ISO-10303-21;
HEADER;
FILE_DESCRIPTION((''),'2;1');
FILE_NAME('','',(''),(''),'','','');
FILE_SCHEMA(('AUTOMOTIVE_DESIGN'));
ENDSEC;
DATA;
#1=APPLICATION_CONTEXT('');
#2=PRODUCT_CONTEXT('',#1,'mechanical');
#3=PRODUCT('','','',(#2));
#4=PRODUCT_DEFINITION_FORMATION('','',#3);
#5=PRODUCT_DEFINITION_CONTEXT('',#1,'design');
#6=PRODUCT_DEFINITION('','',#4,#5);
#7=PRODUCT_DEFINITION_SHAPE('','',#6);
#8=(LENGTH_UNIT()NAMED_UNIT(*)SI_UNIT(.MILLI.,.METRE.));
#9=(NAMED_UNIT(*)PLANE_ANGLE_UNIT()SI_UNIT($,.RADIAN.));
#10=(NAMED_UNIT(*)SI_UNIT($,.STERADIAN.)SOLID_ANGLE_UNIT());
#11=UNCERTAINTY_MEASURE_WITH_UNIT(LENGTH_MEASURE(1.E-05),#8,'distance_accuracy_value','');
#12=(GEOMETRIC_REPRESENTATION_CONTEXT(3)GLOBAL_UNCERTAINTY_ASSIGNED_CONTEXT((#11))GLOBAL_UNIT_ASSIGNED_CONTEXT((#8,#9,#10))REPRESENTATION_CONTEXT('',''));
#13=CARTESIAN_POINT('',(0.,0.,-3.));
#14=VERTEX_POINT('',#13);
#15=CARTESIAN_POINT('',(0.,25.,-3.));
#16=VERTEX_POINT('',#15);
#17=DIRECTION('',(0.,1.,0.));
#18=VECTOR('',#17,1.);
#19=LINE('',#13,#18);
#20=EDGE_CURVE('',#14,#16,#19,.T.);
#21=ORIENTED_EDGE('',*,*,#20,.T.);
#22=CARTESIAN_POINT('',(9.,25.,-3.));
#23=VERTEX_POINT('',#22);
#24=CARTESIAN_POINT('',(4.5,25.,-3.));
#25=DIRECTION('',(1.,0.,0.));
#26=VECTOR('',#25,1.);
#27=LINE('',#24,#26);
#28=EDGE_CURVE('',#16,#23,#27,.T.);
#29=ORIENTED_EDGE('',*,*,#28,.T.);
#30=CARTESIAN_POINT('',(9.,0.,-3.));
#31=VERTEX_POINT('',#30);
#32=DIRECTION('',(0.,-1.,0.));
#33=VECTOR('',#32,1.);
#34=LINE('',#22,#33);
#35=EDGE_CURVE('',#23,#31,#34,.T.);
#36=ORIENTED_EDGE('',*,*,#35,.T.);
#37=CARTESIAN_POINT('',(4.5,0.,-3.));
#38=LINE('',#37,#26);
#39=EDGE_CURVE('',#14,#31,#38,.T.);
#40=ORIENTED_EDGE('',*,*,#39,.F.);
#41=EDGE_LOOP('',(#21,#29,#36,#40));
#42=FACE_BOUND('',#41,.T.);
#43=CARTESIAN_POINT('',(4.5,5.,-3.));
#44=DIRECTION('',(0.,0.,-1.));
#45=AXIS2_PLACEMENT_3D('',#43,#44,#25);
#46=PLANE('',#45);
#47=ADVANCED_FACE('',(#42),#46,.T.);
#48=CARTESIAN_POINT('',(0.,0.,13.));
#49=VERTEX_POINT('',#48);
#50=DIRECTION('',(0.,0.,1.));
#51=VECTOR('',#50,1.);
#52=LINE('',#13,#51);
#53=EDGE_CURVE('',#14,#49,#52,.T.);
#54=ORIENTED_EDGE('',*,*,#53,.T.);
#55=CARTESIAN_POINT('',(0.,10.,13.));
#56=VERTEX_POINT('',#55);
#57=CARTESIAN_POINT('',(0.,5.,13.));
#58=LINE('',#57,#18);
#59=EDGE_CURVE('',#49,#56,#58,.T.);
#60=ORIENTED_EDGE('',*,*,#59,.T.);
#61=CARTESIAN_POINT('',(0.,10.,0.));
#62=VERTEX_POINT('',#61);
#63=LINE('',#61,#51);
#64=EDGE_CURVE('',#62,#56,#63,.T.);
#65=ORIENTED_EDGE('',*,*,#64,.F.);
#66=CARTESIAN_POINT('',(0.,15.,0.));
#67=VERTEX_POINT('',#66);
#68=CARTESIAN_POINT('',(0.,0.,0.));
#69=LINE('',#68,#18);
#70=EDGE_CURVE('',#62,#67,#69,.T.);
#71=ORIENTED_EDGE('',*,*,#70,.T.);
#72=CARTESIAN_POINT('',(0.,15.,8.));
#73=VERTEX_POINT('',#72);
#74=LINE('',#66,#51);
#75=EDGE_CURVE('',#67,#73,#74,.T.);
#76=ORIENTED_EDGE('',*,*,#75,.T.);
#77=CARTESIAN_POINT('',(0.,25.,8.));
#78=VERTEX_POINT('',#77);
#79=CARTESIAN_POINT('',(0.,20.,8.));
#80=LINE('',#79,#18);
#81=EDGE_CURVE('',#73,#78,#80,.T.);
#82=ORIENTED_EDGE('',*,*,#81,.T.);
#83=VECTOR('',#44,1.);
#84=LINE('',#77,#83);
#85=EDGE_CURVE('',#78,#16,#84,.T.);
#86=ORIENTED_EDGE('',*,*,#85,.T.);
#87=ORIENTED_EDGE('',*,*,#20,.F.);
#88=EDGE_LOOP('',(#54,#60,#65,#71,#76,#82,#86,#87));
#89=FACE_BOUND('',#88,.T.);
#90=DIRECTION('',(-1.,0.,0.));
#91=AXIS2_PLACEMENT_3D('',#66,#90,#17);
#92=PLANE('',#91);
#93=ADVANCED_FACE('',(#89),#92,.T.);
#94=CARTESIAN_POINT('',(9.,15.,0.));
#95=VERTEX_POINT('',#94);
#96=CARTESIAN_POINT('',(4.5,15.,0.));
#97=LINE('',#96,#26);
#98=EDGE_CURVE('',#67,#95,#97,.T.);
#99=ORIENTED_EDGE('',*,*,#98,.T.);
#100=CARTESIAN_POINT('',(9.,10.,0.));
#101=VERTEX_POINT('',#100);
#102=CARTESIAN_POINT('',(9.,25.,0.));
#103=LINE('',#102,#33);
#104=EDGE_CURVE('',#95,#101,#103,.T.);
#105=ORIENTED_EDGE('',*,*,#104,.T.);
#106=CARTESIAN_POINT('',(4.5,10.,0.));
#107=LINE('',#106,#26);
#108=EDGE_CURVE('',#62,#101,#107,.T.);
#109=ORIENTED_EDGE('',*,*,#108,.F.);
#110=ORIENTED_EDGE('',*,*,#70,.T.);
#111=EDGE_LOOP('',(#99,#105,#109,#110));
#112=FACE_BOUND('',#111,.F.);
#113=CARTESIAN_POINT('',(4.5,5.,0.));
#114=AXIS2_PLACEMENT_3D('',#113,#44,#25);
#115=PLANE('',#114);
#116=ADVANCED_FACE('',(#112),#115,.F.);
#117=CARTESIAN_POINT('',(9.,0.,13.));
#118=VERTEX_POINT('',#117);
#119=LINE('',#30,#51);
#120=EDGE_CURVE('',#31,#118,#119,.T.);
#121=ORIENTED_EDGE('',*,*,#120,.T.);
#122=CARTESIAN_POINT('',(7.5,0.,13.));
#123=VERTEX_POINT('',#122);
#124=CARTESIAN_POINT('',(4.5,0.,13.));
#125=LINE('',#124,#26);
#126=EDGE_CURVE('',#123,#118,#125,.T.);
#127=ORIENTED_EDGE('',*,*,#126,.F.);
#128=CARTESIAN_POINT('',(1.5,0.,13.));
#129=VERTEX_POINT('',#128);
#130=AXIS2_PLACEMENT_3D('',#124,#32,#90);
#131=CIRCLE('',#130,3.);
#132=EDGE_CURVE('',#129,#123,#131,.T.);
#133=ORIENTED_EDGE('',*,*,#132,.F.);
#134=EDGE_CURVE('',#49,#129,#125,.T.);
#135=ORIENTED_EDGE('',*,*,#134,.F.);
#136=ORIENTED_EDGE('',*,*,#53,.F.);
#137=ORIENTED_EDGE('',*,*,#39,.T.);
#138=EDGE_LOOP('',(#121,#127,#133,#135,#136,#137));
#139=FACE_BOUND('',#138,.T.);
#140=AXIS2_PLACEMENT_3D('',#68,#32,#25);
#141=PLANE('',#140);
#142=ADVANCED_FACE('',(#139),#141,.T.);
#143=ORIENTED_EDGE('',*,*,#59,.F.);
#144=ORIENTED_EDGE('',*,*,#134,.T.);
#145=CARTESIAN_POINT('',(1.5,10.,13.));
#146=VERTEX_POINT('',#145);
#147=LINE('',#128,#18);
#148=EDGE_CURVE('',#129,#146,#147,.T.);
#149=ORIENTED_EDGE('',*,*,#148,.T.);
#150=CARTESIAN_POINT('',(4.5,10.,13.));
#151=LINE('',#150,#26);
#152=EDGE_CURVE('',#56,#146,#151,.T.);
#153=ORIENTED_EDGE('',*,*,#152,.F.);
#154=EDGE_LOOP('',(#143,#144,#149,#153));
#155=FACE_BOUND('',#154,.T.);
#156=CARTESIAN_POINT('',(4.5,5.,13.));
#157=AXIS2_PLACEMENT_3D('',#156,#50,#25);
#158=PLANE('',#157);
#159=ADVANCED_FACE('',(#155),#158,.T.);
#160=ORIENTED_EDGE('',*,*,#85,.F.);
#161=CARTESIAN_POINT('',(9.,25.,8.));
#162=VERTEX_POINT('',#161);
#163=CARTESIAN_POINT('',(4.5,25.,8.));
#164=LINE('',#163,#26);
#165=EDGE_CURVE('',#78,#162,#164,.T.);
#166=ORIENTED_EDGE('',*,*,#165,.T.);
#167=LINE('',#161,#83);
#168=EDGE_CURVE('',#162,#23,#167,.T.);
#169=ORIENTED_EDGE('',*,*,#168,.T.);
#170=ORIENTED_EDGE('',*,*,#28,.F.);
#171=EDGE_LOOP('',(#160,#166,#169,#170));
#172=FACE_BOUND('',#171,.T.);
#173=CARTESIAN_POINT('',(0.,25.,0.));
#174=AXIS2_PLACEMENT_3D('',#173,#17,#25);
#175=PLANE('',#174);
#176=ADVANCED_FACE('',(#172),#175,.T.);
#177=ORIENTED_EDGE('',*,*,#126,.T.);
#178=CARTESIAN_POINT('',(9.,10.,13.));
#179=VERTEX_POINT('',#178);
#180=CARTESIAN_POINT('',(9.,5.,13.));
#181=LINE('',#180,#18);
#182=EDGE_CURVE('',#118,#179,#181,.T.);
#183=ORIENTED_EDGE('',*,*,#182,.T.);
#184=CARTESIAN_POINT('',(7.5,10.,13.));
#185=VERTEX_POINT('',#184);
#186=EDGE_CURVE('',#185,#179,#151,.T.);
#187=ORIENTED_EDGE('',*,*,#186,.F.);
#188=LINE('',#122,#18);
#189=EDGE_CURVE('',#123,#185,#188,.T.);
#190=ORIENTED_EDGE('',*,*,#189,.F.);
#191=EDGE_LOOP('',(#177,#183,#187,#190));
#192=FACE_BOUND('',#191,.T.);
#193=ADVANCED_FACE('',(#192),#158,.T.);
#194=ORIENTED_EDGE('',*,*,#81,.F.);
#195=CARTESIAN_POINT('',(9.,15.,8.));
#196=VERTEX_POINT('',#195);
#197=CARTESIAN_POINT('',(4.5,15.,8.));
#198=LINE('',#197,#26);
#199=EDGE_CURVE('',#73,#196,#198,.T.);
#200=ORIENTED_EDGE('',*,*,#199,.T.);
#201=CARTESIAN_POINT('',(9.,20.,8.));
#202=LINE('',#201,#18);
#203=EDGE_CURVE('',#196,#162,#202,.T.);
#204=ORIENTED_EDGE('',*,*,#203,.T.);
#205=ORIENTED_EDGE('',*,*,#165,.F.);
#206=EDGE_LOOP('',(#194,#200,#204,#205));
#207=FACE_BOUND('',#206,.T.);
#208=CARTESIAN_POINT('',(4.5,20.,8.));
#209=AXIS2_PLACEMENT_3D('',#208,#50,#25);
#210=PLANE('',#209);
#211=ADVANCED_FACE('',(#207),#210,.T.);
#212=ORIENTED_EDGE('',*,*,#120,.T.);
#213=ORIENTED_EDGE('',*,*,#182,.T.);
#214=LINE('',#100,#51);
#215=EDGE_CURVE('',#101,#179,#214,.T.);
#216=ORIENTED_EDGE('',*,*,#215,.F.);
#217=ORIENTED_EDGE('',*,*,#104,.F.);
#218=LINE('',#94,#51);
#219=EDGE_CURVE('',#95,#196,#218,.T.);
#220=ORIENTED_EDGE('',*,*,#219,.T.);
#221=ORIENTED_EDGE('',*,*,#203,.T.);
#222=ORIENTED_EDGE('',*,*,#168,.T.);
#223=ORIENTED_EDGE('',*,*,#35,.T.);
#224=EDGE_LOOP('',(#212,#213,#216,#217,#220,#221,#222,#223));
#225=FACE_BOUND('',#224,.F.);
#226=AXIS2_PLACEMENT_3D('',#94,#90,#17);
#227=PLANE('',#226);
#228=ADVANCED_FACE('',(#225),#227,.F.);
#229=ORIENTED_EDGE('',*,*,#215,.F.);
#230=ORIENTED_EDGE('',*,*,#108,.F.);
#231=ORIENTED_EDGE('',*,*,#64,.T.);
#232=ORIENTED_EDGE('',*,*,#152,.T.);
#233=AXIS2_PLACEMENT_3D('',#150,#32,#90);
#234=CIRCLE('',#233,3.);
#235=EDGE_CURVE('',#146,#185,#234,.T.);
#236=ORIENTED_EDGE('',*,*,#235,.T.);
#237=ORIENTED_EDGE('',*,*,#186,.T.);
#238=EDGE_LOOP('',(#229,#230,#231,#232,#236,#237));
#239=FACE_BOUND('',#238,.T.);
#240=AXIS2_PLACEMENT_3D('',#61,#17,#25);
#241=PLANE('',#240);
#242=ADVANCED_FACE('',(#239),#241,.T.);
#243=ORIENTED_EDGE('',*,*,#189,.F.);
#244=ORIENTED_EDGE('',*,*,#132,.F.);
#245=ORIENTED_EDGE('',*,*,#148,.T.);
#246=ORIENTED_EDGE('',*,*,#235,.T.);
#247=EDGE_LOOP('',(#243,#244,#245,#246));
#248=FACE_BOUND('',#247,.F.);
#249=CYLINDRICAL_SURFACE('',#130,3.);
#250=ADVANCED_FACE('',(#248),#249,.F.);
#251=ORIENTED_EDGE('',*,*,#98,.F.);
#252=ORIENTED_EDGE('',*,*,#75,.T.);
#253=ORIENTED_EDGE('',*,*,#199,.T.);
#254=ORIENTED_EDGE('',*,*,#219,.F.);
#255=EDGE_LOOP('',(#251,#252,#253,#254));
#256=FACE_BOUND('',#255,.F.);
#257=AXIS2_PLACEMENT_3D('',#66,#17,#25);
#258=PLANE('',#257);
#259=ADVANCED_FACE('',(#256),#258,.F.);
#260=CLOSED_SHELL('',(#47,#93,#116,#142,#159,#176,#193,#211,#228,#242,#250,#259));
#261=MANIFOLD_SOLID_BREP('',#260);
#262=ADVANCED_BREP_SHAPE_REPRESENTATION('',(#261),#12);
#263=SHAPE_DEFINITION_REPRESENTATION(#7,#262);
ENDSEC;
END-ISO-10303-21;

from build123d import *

# Parameters (mm, degrees)
F0_W     = 9
F0_H     = 10
F1_DEPTH = 13
F3_DEPTH = 25
F4_W     = 9
F4_H     = 10
F4_H_2   = 15
F5_DEPTH = 3
F6_W     = 9
F6_H     = 10
F7_DEPTH = 8


# Not quite as in the source:
# - a feature names something its author has since deleted; it is built from what else it names


with BuildPart() as f1:
    # F0 (on Top) → F1 (new body)
    with BuildSketch(Plane.XY):
        with Locations((4.5, 5)):
            Rectangle(F0_W, F0_H)
    extrude(amount=F1_DEPTH)

    # F2 (on face) → F3 (cut)
    with BuildSketch(Plane.XZ):
        with BuildLine():
            ThreePointArc((1.5, 13), (4.5, 10), (7.5, 13))
            Line((7.5, 13), (1.5, 13))
        make_face()
    extrude(amount=-F3_DEPTH, mode=Mode.SUBTRACT)

    # F4 (on face) → F5 (join)
    with BuildSketch(Plane(origin=(0, 0, 0), x_dir=(1, 0, 0), z_dir=(0, 0, -1))):
        with Locations((4.5, -5)):
            Rectangle(F4_W, F4_H)
        with Locations((4.5, -17.5)):
            Rectangle(F4_W, F4_H_2)
    extrude(amount=F5_DEPTH)

    # F6 (on face) → F7 (join)
    with BuildSketch(Plane.XY):
        with Locations((4.5, 20)):
            Rectangle(F6_W, F6_H)
    extrude(amount=F7_DEPTH)


solid = f1.part
